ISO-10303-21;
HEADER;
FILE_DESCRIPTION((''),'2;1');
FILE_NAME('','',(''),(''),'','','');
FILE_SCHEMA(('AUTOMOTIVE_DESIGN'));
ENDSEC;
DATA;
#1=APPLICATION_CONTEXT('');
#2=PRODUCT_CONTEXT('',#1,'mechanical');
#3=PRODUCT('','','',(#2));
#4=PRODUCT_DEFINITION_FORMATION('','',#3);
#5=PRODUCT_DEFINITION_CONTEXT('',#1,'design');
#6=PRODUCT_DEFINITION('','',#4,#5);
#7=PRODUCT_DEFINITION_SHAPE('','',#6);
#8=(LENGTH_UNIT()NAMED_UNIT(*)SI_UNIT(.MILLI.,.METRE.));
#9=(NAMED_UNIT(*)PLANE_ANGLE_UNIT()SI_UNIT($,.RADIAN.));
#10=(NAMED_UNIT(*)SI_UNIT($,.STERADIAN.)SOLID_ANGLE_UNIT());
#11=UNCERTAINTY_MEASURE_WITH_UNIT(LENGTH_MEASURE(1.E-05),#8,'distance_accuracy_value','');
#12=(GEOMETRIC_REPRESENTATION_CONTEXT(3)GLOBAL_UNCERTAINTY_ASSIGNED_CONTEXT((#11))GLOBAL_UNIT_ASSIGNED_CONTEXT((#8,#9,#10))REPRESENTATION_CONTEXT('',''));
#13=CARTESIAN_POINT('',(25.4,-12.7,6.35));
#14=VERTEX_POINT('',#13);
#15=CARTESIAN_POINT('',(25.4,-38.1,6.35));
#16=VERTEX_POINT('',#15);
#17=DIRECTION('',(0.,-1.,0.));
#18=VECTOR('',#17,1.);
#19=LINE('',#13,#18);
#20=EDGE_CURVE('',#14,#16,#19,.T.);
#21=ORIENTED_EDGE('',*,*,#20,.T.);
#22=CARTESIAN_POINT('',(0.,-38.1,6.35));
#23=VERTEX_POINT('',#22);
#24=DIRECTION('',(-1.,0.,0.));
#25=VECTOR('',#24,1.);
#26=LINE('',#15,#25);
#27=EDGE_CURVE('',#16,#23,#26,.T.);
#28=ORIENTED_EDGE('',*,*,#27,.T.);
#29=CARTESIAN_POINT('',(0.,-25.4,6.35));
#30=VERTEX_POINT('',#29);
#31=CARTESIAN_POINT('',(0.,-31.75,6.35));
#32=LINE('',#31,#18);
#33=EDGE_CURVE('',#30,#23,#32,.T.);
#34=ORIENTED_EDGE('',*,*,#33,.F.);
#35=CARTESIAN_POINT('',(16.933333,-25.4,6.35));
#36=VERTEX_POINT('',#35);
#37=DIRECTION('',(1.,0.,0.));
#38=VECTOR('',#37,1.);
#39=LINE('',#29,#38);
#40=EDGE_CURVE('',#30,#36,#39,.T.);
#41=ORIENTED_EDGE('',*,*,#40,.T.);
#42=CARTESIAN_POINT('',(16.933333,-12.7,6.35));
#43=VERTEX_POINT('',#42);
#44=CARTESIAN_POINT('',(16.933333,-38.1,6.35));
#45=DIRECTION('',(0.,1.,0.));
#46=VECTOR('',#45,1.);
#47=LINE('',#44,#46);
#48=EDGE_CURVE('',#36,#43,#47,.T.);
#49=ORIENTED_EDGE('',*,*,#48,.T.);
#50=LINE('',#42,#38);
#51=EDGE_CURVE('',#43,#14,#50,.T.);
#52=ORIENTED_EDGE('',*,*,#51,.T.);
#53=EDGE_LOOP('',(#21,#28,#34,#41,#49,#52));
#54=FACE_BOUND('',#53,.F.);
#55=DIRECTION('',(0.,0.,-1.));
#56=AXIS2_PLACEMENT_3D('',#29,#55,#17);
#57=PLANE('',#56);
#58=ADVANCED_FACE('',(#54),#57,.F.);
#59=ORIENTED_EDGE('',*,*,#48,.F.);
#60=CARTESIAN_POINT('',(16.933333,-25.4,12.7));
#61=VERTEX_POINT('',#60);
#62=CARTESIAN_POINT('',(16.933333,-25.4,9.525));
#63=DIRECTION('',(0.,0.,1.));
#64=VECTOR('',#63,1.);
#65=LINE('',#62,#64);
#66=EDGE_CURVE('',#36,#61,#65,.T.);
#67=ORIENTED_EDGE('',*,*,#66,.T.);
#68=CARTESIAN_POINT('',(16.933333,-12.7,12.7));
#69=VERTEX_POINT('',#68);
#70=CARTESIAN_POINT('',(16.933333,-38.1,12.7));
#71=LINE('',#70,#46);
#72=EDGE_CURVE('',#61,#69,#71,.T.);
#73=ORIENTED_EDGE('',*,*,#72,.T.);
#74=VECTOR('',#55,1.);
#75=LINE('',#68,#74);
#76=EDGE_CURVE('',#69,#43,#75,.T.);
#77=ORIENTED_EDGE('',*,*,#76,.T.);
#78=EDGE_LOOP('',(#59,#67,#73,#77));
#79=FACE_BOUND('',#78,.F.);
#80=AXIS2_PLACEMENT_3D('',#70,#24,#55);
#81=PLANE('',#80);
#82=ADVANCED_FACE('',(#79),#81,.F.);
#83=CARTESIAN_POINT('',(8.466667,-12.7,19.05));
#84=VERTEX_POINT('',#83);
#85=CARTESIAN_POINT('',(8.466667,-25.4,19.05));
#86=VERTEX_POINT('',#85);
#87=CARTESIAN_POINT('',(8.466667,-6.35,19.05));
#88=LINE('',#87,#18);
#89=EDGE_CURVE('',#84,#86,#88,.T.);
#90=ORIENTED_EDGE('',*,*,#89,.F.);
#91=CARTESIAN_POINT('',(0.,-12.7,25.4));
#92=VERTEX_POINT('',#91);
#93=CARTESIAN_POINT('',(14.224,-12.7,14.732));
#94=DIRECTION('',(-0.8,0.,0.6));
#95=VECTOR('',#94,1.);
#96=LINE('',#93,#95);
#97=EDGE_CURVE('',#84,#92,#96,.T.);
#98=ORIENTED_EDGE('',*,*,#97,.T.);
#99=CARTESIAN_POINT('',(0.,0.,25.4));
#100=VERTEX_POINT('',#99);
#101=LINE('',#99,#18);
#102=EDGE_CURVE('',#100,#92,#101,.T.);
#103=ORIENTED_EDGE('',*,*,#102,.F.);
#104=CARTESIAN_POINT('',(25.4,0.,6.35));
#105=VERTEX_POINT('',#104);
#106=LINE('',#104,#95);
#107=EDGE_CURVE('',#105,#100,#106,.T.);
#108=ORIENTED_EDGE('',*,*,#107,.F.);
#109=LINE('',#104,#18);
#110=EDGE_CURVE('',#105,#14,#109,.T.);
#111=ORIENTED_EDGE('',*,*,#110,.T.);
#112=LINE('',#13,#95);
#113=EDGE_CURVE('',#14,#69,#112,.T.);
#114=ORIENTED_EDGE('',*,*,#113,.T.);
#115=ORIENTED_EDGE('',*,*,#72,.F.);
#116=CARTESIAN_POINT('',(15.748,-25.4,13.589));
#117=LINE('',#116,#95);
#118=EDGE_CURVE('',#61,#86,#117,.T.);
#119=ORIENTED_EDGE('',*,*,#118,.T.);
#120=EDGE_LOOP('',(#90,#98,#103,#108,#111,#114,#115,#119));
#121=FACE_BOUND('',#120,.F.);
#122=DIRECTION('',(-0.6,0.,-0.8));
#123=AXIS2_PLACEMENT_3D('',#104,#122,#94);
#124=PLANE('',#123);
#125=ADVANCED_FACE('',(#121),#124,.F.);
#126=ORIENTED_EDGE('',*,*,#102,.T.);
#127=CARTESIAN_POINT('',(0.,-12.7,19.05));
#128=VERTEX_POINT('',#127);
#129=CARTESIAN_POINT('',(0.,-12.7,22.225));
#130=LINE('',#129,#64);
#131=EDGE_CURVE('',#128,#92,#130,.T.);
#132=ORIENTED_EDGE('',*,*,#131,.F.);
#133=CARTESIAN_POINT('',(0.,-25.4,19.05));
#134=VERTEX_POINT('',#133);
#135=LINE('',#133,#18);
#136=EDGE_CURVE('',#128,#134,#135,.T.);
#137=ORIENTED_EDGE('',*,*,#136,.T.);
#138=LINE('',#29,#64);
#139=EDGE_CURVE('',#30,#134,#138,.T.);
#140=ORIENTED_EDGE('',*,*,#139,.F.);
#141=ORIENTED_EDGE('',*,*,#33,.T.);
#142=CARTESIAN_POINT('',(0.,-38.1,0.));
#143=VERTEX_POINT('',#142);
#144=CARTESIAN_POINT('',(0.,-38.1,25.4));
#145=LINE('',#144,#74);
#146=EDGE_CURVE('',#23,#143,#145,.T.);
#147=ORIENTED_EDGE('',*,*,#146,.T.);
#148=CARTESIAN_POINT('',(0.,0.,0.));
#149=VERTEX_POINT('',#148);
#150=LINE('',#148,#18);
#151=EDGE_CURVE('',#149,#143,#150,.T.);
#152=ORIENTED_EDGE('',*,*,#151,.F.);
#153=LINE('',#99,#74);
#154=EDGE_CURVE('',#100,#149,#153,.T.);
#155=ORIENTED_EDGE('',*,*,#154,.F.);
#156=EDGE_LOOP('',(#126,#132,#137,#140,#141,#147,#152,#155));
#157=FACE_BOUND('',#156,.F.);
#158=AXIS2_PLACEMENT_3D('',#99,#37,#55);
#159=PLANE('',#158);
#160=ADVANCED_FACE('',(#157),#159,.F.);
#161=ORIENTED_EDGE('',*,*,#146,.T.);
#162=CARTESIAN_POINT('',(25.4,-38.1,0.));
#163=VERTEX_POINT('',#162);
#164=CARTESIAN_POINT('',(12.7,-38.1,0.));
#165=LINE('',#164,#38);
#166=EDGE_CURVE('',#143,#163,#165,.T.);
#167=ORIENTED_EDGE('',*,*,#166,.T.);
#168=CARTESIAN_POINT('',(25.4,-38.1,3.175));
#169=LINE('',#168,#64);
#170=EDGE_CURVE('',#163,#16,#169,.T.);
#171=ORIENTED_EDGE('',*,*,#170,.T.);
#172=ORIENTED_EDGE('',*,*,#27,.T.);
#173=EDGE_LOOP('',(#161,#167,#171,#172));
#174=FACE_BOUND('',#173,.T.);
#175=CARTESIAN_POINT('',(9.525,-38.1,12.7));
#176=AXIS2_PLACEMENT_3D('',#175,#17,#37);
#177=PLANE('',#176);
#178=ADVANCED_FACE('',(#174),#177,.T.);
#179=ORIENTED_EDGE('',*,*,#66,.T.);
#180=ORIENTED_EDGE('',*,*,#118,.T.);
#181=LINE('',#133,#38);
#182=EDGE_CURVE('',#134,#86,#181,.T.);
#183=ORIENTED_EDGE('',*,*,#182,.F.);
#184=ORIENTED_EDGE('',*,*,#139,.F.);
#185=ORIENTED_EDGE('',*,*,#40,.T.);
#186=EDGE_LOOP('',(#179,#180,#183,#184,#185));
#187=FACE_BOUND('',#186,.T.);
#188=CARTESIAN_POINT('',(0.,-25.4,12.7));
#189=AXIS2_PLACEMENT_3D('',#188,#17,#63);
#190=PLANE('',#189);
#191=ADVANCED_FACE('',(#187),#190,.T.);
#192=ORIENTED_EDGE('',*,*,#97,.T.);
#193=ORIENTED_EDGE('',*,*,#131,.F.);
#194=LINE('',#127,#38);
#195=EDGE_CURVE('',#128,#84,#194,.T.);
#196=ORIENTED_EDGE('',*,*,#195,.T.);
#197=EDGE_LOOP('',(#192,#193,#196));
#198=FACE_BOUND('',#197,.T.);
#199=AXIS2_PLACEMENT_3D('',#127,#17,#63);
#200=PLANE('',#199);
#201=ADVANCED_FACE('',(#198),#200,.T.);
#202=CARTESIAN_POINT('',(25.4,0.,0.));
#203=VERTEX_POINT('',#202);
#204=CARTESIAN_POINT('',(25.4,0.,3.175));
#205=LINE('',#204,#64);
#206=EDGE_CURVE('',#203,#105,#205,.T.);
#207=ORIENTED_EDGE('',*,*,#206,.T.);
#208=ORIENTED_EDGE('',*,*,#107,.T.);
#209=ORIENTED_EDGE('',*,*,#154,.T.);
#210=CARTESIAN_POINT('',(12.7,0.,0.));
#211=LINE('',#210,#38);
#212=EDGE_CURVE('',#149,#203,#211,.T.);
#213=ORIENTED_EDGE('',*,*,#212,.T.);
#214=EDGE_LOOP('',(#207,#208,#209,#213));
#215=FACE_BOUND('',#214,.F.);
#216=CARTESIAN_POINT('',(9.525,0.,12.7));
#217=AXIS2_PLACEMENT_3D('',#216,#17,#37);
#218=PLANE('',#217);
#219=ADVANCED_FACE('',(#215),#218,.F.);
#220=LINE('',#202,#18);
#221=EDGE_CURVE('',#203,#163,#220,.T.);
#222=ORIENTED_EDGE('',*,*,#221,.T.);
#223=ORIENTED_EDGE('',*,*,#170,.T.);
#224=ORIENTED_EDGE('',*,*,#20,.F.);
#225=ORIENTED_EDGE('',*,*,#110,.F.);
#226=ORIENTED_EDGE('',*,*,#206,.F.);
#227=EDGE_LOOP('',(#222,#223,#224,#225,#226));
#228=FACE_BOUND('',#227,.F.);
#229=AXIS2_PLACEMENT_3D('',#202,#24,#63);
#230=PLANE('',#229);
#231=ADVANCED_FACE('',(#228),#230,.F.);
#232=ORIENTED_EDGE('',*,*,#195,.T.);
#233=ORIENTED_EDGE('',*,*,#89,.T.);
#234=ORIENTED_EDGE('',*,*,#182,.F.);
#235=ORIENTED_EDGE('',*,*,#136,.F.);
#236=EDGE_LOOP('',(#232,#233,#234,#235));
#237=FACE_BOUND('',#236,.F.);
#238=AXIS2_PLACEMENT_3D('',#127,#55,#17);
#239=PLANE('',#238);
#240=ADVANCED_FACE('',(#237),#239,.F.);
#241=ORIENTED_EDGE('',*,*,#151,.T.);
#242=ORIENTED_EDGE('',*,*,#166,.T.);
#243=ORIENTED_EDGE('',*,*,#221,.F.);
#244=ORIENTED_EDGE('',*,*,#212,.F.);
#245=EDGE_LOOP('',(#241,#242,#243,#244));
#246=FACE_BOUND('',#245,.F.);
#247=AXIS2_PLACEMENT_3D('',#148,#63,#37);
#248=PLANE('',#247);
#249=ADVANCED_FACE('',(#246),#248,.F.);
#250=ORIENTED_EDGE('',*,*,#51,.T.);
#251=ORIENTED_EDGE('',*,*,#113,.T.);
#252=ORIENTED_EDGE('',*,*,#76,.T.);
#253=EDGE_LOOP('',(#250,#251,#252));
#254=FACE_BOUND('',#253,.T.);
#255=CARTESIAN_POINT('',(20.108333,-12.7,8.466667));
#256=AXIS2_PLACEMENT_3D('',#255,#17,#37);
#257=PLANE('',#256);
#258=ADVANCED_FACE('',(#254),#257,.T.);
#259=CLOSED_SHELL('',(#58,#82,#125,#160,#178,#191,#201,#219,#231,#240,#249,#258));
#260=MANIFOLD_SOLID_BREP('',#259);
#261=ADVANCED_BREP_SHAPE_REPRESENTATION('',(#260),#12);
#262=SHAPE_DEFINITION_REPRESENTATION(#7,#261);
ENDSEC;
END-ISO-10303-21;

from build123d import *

# Parameters (mm, degrees)
F0_W     = 25.4
F0_H     = 6.35
F1_DEPTH = 38.1
F2_W     = 25.4
F2_H     = 6.35
F3_DEPTH = 25.401
F5_DEPTH = 25.4
F6_W     = 12.7
F6_H     = 6.35
F7_DEPTH = 25.401
F8_W     = 12.7
F8_H     = 6.35
F9_DEPTH = 25.401


# Not quite as in the source:
# - a feature names something its author has since deleted; it is built from what else it names


with BuildPart() as f1:
    # F0 (on Front) → F1 (new body)
    with BuildSketch(Plane.XZ):
        Polygon((25.4, 6.35), (0, 25.4), (0, 6.35), align=None)
        with Locations((12.7, 3.175)):
            Rectangle(F0_W, F0_H)
    extrude(amount=F1_DEPTH)

    # F2 (on face) → F3 (cut, through all)
    with BuildSketch(Plane(origin=(0, 0, 0), x_dir=(0, -1, 0), z_dir=(-1, 0, 0))):
        with Locations((25.4, 22.225)):
            Rectangle(F2_W, F2_H)
    extrude(amount=-F3_DEPTH, mode=Mode.SUBTRACT)

    # F4 (on face) → F5 (cut)
    with BuildSketch(Plane.XZ.offset(38.1)):
        Polygon((16.9333333333, 6.35), (25.4, 6.35), (16.9333333333, 12.7), align=None)
    extrude(amount=-F5_DEPTH, mode=Mode.SUBTRACT)

    # F6 (on face) → F7 (cut, through all)
    with BuildSketch(Plane(origin=(0, 0, 0), x_dir=(0, -1, 0), z_dir=(-1, 0, 0))):
        with Locations((31.75, 15.875)):
            Rectangle(F6_W, F6_H)
    extrude(amount=-F7_DEPTH, mode=Mode.SUBTRACT)

    # F8 (on face) → F9 (cut, through all)
    with BuildSketch(Plane(origin=(0, 0, 0), x_dir=(0, -1, 0), z_dir=(-1, 0, 0))):
        with Locations((31.75, 9.525)):
            Rectangle(F8_W, F8_H)
    extrude(amount=-F9_DEPTH, mode=Mode.SUBTRACT)


solid = f1.part
